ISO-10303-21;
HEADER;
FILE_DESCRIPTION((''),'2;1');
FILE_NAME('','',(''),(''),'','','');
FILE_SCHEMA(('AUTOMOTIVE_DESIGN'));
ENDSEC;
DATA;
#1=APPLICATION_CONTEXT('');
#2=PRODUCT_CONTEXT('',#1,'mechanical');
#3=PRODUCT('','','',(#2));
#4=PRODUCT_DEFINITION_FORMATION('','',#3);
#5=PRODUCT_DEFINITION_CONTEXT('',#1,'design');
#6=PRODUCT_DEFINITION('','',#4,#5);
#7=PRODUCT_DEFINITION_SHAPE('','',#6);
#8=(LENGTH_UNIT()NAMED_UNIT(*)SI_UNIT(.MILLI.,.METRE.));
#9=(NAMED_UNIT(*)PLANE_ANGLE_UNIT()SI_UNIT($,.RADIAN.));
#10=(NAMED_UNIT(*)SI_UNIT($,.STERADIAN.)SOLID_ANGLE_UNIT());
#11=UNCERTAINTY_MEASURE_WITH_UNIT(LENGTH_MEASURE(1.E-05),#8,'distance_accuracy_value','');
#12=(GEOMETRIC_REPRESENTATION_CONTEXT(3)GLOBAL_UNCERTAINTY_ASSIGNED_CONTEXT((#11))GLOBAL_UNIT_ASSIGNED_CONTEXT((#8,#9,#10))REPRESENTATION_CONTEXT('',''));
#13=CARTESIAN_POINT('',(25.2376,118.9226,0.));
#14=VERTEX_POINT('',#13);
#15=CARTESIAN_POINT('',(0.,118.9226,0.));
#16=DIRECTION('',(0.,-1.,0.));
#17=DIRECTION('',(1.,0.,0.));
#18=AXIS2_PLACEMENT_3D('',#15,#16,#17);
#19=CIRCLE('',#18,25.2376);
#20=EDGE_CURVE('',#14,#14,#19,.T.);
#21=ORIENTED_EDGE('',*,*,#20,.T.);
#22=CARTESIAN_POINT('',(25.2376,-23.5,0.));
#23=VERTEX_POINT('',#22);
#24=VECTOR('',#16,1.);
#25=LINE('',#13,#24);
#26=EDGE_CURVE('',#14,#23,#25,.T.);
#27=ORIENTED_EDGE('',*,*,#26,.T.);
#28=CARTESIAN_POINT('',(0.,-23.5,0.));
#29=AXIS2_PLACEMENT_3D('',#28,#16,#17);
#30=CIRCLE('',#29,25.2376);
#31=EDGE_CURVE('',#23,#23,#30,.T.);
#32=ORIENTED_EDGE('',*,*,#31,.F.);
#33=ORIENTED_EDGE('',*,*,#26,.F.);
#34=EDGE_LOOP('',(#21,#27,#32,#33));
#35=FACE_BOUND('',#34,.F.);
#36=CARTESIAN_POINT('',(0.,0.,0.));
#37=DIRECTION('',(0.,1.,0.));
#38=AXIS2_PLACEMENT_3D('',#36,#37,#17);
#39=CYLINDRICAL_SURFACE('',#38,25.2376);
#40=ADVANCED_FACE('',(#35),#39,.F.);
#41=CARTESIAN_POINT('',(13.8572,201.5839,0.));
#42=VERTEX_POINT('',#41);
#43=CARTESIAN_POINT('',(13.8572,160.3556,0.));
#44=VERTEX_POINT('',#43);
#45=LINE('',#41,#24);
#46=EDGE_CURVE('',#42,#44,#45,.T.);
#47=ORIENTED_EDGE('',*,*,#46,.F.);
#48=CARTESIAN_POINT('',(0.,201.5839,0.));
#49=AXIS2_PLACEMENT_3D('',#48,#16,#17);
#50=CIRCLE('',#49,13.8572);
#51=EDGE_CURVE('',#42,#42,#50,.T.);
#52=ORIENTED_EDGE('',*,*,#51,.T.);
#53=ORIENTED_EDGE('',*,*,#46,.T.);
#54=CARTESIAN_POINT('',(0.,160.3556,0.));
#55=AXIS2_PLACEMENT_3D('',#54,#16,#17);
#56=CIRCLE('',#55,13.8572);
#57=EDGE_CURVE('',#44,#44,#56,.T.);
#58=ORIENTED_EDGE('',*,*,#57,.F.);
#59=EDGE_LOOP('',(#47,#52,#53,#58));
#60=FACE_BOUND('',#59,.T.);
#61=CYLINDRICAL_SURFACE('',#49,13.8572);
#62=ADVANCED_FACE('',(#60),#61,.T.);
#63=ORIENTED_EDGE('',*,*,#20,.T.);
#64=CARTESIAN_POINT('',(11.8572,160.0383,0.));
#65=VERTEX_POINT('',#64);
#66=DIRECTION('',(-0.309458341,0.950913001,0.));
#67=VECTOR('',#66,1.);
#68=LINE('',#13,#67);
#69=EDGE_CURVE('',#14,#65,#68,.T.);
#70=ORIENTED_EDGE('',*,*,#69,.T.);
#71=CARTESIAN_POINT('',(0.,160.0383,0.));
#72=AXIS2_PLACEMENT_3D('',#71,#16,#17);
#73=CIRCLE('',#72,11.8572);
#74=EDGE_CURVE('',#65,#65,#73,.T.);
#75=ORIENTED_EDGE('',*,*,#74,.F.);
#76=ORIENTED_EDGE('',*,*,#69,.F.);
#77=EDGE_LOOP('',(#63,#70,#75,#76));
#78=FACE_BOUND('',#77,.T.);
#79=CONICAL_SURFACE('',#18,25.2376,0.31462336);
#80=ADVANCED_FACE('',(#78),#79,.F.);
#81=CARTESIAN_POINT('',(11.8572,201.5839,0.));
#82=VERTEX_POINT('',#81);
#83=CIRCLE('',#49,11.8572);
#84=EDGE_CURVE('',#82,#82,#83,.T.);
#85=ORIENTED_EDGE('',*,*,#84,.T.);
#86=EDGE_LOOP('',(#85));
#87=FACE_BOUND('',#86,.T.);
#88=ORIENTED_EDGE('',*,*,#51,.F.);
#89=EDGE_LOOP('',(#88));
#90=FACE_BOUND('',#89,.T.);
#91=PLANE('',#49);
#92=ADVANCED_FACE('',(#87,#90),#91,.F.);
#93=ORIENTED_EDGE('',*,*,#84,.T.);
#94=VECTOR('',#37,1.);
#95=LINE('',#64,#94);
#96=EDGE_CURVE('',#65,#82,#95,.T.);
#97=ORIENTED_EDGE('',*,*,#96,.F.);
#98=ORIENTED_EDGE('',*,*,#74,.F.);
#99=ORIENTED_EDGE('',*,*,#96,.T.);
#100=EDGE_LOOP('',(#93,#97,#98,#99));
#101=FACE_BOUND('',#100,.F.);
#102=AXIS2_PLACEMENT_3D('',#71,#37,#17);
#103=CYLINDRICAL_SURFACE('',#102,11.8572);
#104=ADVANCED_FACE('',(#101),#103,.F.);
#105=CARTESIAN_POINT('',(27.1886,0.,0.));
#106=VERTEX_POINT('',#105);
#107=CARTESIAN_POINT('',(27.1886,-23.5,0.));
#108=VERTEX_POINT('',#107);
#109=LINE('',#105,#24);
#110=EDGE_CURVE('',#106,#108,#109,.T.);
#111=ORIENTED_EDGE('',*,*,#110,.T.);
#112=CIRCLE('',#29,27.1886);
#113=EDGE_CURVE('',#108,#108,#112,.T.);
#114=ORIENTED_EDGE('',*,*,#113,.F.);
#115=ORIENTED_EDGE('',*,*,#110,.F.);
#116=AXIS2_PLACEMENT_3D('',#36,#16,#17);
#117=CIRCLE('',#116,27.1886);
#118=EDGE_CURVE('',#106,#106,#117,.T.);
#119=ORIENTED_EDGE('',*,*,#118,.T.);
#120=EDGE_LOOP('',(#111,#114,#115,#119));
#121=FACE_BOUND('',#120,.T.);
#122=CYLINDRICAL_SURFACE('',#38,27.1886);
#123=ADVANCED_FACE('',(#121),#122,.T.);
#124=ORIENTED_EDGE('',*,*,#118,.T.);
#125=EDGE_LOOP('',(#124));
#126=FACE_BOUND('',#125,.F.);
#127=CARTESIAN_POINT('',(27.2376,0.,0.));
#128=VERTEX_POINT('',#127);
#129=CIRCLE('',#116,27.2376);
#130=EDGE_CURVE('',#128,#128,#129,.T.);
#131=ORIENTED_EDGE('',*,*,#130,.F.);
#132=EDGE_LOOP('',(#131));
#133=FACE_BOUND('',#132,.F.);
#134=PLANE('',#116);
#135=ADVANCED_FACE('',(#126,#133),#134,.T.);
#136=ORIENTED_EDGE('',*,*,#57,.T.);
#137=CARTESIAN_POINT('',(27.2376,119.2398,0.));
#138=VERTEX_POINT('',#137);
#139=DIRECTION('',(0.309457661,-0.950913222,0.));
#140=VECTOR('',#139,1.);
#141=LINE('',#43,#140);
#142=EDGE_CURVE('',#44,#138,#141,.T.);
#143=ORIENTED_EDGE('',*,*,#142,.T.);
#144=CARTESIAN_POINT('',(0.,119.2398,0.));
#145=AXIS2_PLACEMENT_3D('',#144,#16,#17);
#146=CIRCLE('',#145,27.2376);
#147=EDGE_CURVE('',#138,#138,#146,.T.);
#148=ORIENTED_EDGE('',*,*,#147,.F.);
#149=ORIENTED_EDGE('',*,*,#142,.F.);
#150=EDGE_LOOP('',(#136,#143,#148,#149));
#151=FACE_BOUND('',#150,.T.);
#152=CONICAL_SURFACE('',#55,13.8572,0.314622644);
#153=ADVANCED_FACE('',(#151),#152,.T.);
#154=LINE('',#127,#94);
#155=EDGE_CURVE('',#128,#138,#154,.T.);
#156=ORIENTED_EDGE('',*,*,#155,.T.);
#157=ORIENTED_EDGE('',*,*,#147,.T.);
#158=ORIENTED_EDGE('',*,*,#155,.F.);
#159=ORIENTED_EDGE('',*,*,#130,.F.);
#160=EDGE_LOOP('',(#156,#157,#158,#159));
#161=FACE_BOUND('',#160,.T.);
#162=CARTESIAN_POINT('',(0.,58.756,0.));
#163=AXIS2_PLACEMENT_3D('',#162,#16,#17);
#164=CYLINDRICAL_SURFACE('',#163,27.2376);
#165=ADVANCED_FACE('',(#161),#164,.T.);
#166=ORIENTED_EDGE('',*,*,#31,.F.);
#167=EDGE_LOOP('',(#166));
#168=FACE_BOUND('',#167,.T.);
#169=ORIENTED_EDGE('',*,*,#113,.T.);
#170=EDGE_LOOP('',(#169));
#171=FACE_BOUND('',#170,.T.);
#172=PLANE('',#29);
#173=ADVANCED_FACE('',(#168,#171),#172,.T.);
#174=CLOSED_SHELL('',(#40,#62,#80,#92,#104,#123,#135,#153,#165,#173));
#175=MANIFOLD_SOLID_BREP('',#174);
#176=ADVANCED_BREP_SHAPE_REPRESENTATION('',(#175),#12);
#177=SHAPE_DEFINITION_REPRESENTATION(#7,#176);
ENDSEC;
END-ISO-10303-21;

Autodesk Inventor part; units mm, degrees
ref_plane "YZ Plane" through (0, 0, 0) normal (1, 0, 0) x (0, 1, 0)
ref_plane "XZ Plane" through (0, 0, 0) normal (0, 1, 0) x (-1, 0, 0)
ref_plane "XY Plane" through (0, 0, 0) normal (0, 0, 1) x (1, 0, 0)
sketch "Esquisse3" plane through (0, 0, 0) normal (0, 0, 1) x (1, 0, 0)
  line L0 (0, 0) -> (25.2376, 0)
  line L1 (25.2376, 0) -> (25.2376, 58.756)
  line L2 (25.2376, 58.756) -> (25.2376, 118.9226)
  line L3 (25.2376, 118.9226) -> (11.8572, 160.0383)
  line L4 (11.8572, 160.0383) -> (11.8572, 201.5839)
  line L5 (0, 244.1266) -> (0, -47.634)
  line L6 (13.8572, 201.5839) -> (13.8572, 160.3556)
  line L7 (13.8572, 160.3556) -> (27.2376, 119.2398)
  line L8 (27.2376, 119.2398) -> (27.2376, 58.756)
  line L9 (27.2376, 58.756) -> (27.2376, -2)
  line L10 (27.2376, -2) -> (0, -2)
  line L11 (11.8572, 201.5839) -> (13.8572, 201.5839)
  line L12 (25.2376, 0) -> (27.2376, 0)
  dimension "d2" = 58.756
  dimension "d3" = 90
  dimension "d4" = 2
revolve "Révolution1" add sketch "Esquisse3" angle 360 about axis through (0, 244.1266, 0) along (0, -1, 0) contours L1 L2 L3 L4 L11 L6 L7 L8 L9 L12
sketch "Esquisse4" plane through (0, 0, 0) normal (0, -1, 0) x (1, 0, 0)
  circle A0 centre (0, 0) radius 25.2376
  circle A1 centre (0, 0) radius 27.1886
extrude "Extrusion1" add sketch "Esquisse4" along normal blind 23.5
